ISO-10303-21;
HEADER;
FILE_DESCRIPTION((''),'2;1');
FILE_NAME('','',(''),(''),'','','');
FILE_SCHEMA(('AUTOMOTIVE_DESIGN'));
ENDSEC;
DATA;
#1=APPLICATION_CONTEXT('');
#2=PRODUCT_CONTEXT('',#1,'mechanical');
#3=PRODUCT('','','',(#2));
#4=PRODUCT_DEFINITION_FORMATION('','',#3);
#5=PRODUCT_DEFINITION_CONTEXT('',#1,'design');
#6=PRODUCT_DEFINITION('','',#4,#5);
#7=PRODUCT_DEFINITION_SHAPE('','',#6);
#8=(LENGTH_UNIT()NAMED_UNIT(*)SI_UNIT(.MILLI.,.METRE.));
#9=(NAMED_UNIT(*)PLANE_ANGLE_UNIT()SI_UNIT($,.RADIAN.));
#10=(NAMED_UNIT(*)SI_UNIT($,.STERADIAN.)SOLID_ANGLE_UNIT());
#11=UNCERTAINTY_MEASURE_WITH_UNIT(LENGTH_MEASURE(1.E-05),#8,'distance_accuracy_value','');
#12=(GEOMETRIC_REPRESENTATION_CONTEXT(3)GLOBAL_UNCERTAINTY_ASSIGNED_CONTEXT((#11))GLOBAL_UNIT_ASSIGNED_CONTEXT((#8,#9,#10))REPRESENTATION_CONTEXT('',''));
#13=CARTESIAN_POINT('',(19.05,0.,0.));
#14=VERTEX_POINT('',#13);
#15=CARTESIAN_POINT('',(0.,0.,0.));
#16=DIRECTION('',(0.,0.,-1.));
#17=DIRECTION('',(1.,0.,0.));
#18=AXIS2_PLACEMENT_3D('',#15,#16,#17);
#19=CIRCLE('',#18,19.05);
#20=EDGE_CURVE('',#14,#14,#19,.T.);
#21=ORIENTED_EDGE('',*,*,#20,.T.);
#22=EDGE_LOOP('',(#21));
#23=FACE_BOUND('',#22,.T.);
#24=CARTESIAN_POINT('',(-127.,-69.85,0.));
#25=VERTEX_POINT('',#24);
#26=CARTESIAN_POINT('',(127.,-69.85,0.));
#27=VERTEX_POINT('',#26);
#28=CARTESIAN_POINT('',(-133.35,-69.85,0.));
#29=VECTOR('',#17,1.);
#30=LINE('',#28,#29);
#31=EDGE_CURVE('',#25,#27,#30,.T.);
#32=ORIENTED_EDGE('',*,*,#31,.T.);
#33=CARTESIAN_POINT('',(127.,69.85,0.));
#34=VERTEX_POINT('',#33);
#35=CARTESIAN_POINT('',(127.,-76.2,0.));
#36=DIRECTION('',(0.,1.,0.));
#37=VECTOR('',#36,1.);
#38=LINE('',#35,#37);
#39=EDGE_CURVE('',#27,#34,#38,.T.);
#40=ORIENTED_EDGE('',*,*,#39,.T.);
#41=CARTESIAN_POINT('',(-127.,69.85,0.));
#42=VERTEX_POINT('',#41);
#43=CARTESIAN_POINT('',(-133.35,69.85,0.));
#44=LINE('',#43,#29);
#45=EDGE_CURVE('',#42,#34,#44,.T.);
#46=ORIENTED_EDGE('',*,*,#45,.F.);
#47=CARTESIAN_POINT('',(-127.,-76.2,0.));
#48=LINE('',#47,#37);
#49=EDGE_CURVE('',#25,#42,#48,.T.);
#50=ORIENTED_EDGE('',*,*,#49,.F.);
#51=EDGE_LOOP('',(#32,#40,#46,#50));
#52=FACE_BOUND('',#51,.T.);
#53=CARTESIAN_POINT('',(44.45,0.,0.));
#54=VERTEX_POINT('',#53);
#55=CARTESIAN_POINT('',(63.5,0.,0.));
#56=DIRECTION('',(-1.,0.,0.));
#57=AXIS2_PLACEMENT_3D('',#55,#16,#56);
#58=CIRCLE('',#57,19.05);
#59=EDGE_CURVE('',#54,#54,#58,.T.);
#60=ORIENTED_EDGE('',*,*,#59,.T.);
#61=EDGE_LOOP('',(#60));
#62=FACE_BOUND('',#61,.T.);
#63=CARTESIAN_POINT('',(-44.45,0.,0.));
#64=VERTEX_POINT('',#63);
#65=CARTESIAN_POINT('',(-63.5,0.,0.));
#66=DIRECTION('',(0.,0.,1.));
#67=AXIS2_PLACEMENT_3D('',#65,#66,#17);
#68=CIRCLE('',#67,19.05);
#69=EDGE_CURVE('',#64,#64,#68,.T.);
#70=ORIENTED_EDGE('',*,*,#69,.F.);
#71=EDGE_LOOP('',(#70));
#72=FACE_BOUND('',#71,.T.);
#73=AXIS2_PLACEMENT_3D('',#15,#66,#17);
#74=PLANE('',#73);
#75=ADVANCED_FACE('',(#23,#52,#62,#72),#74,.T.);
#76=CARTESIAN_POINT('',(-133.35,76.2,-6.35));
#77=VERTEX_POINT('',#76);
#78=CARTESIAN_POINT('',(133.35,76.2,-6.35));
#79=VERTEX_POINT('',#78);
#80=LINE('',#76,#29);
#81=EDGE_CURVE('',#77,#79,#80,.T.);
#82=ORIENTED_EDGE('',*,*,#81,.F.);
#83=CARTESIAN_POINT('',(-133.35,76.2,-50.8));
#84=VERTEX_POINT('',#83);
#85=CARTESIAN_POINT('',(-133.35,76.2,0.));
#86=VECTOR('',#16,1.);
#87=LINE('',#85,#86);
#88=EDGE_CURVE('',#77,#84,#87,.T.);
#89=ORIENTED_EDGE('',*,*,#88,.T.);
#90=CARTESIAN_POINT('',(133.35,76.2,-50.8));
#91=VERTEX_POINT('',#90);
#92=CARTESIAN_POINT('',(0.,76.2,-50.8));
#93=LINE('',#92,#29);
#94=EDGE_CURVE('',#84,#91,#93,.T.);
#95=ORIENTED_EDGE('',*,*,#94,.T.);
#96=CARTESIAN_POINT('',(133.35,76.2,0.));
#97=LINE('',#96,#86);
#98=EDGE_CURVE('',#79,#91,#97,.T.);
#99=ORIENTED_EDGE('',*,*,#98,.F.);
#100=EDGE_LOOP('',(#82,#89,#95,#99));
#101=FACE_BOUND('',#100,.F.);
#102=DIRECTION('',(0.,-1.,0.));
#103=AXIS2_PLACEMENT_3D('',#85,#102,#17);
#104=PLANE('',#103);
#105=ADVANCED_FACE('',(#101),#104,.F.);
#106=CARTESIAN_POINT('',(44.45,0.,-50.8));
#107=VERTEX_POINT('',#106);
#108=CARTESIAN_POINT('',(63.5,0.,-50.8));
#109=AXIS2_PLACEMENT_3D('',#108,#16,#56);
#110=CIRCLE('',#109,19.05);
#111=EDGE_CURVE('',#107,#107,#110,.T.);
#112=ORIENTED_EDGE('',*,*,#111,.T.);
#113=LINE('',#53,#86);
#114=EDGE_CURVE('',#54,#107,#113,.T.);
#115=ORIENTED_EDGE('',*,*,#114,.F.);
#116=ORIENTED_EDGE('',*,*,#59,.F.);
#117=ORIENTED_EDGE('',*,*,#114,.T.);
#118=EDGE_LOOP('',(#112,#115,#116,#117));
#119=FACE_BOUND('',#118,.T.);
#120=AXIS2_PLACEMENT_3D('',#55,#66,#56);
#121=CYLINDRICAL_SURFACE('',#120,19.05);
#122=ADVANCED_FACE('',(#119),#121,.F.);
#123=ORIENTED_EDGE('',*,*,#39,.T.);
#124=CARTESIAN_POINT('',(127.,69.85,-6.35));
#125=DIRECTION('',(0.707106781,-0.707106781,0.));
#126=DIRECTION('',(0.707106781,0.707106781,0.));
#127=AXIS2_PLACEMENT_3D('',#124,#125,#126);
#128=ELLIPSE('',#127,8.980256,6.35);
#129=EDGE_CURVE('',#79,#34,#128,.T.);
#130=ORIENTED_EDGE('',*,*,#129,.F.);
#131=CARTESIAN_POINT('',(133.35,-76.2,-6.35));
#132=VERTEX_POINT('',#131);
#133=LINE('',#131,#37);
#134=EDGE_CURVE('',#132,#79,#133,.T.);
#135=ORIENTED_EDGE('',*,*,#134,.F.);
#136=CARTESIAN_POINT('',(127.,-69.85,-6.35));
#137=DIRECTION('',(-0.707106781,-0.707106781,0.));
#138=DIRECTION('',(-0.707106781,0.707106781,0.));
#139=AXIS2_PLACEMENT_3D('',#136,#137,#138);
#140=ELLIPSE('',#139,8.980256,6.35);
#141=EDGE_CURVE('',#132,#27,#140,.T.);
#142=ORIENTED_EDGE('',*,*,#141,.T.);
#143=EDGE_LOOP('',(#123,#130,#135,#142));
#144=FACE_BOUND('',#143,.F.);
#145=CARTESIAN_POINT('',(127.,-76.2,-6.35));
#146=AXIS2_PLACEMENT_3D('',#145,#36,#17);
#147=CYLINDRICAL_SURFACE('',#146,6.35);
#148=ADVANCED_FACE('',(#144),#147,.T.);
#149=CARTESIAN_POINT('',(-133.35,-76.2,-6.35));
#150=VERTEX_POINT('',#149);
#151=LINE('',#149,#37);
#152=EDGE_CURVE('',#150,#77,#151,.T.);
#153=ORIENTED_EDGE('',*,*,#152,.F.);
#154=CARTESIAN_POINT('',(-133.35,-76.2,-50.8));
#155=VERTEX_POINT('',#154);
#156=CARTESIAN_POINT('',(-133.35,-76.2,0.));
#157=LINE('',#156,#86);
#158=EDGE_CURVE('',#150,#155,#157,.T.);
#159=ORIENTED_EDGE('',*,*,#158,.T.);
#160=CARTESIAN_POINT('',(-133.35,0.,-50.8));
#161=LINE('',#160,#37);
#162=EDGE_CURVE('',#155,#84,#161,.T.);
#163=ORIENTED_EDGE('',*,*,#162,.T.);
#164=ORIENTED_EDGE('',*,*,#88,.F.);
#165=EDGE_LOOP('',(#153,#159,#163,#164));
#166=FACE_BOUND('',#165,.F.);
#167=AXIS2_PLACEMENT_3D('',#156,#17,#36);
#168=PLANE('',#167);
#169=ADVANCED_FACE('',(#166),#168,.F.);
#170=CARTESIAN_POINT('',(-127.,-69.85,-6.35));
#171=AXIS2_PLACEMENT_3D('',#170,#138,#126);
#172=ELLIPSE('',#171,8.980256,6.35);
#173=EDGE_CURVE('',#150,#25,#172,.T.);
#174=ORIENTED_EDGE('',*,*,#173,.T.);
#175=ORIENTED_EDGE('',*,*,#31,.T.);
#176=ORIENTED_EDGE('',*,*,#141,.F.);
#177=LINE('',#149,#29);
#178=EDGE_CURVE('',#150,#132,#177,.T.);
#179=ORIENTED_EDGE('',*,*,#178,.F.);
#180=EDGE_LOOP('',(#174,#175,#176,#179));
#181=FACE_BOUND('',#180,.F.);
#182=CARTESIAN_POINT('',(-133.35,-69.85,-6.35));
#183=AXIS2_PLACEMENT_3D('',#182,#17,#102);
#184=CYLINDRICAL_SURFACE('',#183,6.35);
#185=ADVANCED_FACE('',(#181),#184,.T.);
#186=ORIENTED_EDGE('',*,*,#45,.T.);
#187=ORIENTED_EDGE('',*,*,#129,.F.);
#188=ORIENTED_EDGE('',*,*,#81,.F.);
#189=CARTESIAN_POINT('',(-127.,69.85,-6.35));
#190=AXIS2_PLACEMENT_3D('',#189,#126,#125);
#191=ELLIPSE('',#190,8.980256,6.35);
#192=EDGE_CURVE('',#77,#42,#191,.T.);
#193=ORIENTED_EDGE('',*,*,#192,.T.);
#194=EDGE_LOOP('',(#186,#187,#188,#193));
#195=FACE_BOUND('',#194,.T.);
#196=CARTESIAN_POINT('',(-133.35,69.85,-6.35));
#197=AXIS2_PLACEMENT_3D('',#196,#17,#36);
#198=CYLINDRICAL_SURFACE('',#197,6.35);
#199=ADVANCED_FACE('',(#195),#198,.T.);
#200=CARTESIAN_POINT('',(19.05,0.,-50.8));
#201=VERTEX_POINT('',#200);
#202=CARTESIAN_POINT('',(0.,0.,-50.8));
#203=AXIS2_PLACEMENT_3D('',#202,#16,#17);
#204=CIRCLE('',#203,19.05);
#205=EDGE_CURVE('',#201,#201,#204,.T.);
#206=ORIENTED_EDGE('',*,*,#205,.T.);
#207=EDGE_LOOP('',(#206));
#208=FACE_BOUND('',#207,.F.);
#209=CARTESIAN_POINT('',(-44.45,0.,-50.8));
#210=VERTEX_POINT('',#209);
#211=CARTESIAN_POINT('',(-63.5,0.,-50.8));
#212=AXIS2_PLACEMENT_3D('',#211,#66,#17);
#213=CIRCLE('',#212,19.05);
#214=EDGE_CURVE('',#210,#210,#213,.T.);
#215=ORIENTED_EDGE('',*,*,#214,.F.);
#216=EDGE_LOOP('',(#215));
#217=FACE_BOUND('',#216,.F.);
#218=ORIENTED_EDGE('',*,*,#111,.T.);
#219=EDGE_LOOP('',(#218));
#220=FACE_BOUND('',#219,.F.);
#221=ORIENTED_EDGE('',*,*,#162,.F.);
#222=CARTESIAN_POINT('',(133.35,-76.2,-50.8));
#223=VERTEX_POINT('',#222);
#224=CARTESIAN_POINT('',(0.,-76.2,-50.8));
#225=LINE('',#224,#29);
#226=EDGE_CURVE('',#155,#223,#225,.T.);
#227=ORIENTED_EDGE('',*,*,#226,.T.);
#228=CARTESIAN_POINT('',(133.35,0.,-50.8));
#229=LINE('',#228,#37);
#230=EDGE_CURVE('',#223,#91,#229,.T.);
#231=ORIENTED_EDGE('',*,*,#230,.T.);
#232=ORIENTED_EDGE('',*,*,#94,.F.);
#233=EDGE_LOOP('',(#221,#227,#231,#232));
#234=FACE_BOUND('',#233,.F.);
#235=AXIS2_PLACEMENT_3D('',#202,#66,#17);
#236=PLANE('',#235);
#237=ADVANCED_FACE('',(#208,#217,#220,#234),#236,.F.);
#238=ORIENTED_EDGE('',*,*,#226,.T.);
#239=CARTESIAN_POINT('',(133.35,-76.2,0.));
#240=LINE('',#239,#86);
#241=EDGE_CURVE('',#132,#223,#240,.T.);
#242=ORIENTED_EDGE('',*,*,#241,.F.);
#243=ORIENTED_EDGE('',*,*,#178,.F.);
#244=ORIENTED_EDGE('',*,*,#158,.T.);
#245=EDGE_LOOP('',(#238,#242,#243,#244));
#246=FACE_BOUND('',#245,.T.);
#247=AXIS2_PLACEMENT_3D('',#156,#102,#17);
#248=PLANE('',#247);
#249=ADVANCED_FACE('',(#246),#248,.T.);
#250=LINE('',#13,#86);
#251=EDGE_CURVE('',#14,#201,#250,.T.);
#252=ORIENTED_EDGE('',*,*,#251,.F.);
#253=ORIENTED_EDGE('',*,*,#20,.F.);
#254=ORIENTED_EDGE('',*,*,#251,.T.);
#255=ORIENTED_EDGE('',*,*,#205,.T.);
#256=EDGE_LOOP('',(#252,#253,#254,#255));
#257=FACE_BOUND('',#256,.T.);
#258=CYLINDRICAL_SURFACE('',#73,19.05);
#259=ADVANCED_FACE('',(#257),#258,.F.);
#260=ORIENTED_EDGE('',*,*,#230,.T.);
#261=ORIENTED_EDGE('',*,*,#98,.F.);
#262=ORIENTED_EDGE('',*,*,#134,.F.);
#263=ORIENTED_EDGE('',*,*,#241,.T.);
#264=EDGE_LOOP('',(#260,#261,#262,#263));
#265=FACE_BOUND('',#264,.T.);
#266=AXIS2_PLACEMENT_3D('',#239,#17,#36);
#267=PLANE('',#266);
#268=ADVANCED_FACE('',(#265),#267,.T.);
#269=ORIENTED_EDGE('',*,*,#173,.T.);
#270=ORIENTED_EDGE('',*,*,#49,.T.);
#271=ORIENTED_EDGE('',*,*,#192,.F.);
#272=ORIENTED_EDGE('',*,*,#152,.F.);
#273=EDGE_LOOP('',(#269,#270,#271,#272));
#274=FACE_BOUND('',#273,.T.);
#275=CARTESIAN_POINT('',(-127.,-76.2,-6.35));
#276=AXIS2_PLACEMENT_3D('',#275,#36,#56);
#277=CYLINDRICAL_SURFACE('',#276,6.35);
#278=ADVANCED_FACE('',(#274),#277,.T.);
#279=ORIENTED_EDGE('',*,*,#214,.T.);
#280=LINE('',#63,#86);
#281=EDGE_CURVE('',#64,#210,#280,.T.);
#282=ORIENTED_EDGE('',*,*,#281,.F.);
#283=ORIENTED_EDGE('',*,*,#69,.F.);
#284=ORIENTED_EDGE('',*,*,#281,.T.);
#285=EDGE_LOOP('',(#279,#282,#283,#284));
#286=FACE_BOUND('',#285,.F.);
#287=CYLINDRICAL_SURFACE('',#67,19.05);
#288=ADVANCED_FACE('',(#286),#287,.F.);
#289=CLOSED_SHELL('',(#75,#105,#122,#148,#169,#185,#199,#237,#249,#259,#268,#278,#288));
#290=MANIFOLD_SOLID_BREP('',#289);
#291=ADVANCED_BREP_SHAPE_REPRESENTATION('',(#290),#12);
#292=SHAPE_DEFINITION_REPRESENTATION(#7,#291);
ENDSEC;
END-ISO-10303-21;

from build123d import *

# Parameters (mm, degrees)
F0_W     = 266.7
F0_H     = 152.4
F0_R     = 19.05
F1_DEPTH = 50.8
F2_DEPTH = 50.8
F3_R     = 6.35


with BuildPart() as f1:
    # F0 (on Top) → F1 (new body)
    with BuildSketch(Plane.XY):
        Rectangle(F0_W, F0_H)
        with Locations((-63.5, 0)):
            Circle(F0_R, mode=Mode.SUBTRACT)
        with BuildLine():
            ThreePointArc((-19.05, 0), (0, 19.05), (19.05, 0))
            ThreePointArc((19.05, 0), (0, -19.05), (-19.05, 0))
        make_face(mode=Mode.SUBTRACT)
        with BuildLine():
            ThreePointArc((82.55, 0), (63.5, -19.05), (44.45, 0))
            ThreePointArc((44.45, 0), (63.5, 19.05), (82.55, 0))
        make_face(mode=Mode.SUBTRACT)
    extrude(amount=-F1_DEPTH)

    # F0 (on Top) → F2 (cut)
    with BuildSketch(Plane.XY):
        with BuildLine():
            ThreePointArc((82.55, 0), (63.5, 19.05), (44.45, 0))
            ThreePointArc((44.45, 0), (63.5, -19.05), (82.55, 0))
        make_face()
        with Locations((-63.5, 0)):
            Circle(F0_R)
    extrude(amount=-F2_DEPTH, mode=Mode.SUBTRACT)

    # F3
    f3_edges = [f1.edges().sort_by_distance(p)[0] for p in [
        (0, 76.2, 0),
        (-133.35, 0, 0),
        (133.35, 0, 0),
        (0, -76.2, 0),
    ]]
    fillet(f3_edges, radius=F3_R)


solid = f1.part
